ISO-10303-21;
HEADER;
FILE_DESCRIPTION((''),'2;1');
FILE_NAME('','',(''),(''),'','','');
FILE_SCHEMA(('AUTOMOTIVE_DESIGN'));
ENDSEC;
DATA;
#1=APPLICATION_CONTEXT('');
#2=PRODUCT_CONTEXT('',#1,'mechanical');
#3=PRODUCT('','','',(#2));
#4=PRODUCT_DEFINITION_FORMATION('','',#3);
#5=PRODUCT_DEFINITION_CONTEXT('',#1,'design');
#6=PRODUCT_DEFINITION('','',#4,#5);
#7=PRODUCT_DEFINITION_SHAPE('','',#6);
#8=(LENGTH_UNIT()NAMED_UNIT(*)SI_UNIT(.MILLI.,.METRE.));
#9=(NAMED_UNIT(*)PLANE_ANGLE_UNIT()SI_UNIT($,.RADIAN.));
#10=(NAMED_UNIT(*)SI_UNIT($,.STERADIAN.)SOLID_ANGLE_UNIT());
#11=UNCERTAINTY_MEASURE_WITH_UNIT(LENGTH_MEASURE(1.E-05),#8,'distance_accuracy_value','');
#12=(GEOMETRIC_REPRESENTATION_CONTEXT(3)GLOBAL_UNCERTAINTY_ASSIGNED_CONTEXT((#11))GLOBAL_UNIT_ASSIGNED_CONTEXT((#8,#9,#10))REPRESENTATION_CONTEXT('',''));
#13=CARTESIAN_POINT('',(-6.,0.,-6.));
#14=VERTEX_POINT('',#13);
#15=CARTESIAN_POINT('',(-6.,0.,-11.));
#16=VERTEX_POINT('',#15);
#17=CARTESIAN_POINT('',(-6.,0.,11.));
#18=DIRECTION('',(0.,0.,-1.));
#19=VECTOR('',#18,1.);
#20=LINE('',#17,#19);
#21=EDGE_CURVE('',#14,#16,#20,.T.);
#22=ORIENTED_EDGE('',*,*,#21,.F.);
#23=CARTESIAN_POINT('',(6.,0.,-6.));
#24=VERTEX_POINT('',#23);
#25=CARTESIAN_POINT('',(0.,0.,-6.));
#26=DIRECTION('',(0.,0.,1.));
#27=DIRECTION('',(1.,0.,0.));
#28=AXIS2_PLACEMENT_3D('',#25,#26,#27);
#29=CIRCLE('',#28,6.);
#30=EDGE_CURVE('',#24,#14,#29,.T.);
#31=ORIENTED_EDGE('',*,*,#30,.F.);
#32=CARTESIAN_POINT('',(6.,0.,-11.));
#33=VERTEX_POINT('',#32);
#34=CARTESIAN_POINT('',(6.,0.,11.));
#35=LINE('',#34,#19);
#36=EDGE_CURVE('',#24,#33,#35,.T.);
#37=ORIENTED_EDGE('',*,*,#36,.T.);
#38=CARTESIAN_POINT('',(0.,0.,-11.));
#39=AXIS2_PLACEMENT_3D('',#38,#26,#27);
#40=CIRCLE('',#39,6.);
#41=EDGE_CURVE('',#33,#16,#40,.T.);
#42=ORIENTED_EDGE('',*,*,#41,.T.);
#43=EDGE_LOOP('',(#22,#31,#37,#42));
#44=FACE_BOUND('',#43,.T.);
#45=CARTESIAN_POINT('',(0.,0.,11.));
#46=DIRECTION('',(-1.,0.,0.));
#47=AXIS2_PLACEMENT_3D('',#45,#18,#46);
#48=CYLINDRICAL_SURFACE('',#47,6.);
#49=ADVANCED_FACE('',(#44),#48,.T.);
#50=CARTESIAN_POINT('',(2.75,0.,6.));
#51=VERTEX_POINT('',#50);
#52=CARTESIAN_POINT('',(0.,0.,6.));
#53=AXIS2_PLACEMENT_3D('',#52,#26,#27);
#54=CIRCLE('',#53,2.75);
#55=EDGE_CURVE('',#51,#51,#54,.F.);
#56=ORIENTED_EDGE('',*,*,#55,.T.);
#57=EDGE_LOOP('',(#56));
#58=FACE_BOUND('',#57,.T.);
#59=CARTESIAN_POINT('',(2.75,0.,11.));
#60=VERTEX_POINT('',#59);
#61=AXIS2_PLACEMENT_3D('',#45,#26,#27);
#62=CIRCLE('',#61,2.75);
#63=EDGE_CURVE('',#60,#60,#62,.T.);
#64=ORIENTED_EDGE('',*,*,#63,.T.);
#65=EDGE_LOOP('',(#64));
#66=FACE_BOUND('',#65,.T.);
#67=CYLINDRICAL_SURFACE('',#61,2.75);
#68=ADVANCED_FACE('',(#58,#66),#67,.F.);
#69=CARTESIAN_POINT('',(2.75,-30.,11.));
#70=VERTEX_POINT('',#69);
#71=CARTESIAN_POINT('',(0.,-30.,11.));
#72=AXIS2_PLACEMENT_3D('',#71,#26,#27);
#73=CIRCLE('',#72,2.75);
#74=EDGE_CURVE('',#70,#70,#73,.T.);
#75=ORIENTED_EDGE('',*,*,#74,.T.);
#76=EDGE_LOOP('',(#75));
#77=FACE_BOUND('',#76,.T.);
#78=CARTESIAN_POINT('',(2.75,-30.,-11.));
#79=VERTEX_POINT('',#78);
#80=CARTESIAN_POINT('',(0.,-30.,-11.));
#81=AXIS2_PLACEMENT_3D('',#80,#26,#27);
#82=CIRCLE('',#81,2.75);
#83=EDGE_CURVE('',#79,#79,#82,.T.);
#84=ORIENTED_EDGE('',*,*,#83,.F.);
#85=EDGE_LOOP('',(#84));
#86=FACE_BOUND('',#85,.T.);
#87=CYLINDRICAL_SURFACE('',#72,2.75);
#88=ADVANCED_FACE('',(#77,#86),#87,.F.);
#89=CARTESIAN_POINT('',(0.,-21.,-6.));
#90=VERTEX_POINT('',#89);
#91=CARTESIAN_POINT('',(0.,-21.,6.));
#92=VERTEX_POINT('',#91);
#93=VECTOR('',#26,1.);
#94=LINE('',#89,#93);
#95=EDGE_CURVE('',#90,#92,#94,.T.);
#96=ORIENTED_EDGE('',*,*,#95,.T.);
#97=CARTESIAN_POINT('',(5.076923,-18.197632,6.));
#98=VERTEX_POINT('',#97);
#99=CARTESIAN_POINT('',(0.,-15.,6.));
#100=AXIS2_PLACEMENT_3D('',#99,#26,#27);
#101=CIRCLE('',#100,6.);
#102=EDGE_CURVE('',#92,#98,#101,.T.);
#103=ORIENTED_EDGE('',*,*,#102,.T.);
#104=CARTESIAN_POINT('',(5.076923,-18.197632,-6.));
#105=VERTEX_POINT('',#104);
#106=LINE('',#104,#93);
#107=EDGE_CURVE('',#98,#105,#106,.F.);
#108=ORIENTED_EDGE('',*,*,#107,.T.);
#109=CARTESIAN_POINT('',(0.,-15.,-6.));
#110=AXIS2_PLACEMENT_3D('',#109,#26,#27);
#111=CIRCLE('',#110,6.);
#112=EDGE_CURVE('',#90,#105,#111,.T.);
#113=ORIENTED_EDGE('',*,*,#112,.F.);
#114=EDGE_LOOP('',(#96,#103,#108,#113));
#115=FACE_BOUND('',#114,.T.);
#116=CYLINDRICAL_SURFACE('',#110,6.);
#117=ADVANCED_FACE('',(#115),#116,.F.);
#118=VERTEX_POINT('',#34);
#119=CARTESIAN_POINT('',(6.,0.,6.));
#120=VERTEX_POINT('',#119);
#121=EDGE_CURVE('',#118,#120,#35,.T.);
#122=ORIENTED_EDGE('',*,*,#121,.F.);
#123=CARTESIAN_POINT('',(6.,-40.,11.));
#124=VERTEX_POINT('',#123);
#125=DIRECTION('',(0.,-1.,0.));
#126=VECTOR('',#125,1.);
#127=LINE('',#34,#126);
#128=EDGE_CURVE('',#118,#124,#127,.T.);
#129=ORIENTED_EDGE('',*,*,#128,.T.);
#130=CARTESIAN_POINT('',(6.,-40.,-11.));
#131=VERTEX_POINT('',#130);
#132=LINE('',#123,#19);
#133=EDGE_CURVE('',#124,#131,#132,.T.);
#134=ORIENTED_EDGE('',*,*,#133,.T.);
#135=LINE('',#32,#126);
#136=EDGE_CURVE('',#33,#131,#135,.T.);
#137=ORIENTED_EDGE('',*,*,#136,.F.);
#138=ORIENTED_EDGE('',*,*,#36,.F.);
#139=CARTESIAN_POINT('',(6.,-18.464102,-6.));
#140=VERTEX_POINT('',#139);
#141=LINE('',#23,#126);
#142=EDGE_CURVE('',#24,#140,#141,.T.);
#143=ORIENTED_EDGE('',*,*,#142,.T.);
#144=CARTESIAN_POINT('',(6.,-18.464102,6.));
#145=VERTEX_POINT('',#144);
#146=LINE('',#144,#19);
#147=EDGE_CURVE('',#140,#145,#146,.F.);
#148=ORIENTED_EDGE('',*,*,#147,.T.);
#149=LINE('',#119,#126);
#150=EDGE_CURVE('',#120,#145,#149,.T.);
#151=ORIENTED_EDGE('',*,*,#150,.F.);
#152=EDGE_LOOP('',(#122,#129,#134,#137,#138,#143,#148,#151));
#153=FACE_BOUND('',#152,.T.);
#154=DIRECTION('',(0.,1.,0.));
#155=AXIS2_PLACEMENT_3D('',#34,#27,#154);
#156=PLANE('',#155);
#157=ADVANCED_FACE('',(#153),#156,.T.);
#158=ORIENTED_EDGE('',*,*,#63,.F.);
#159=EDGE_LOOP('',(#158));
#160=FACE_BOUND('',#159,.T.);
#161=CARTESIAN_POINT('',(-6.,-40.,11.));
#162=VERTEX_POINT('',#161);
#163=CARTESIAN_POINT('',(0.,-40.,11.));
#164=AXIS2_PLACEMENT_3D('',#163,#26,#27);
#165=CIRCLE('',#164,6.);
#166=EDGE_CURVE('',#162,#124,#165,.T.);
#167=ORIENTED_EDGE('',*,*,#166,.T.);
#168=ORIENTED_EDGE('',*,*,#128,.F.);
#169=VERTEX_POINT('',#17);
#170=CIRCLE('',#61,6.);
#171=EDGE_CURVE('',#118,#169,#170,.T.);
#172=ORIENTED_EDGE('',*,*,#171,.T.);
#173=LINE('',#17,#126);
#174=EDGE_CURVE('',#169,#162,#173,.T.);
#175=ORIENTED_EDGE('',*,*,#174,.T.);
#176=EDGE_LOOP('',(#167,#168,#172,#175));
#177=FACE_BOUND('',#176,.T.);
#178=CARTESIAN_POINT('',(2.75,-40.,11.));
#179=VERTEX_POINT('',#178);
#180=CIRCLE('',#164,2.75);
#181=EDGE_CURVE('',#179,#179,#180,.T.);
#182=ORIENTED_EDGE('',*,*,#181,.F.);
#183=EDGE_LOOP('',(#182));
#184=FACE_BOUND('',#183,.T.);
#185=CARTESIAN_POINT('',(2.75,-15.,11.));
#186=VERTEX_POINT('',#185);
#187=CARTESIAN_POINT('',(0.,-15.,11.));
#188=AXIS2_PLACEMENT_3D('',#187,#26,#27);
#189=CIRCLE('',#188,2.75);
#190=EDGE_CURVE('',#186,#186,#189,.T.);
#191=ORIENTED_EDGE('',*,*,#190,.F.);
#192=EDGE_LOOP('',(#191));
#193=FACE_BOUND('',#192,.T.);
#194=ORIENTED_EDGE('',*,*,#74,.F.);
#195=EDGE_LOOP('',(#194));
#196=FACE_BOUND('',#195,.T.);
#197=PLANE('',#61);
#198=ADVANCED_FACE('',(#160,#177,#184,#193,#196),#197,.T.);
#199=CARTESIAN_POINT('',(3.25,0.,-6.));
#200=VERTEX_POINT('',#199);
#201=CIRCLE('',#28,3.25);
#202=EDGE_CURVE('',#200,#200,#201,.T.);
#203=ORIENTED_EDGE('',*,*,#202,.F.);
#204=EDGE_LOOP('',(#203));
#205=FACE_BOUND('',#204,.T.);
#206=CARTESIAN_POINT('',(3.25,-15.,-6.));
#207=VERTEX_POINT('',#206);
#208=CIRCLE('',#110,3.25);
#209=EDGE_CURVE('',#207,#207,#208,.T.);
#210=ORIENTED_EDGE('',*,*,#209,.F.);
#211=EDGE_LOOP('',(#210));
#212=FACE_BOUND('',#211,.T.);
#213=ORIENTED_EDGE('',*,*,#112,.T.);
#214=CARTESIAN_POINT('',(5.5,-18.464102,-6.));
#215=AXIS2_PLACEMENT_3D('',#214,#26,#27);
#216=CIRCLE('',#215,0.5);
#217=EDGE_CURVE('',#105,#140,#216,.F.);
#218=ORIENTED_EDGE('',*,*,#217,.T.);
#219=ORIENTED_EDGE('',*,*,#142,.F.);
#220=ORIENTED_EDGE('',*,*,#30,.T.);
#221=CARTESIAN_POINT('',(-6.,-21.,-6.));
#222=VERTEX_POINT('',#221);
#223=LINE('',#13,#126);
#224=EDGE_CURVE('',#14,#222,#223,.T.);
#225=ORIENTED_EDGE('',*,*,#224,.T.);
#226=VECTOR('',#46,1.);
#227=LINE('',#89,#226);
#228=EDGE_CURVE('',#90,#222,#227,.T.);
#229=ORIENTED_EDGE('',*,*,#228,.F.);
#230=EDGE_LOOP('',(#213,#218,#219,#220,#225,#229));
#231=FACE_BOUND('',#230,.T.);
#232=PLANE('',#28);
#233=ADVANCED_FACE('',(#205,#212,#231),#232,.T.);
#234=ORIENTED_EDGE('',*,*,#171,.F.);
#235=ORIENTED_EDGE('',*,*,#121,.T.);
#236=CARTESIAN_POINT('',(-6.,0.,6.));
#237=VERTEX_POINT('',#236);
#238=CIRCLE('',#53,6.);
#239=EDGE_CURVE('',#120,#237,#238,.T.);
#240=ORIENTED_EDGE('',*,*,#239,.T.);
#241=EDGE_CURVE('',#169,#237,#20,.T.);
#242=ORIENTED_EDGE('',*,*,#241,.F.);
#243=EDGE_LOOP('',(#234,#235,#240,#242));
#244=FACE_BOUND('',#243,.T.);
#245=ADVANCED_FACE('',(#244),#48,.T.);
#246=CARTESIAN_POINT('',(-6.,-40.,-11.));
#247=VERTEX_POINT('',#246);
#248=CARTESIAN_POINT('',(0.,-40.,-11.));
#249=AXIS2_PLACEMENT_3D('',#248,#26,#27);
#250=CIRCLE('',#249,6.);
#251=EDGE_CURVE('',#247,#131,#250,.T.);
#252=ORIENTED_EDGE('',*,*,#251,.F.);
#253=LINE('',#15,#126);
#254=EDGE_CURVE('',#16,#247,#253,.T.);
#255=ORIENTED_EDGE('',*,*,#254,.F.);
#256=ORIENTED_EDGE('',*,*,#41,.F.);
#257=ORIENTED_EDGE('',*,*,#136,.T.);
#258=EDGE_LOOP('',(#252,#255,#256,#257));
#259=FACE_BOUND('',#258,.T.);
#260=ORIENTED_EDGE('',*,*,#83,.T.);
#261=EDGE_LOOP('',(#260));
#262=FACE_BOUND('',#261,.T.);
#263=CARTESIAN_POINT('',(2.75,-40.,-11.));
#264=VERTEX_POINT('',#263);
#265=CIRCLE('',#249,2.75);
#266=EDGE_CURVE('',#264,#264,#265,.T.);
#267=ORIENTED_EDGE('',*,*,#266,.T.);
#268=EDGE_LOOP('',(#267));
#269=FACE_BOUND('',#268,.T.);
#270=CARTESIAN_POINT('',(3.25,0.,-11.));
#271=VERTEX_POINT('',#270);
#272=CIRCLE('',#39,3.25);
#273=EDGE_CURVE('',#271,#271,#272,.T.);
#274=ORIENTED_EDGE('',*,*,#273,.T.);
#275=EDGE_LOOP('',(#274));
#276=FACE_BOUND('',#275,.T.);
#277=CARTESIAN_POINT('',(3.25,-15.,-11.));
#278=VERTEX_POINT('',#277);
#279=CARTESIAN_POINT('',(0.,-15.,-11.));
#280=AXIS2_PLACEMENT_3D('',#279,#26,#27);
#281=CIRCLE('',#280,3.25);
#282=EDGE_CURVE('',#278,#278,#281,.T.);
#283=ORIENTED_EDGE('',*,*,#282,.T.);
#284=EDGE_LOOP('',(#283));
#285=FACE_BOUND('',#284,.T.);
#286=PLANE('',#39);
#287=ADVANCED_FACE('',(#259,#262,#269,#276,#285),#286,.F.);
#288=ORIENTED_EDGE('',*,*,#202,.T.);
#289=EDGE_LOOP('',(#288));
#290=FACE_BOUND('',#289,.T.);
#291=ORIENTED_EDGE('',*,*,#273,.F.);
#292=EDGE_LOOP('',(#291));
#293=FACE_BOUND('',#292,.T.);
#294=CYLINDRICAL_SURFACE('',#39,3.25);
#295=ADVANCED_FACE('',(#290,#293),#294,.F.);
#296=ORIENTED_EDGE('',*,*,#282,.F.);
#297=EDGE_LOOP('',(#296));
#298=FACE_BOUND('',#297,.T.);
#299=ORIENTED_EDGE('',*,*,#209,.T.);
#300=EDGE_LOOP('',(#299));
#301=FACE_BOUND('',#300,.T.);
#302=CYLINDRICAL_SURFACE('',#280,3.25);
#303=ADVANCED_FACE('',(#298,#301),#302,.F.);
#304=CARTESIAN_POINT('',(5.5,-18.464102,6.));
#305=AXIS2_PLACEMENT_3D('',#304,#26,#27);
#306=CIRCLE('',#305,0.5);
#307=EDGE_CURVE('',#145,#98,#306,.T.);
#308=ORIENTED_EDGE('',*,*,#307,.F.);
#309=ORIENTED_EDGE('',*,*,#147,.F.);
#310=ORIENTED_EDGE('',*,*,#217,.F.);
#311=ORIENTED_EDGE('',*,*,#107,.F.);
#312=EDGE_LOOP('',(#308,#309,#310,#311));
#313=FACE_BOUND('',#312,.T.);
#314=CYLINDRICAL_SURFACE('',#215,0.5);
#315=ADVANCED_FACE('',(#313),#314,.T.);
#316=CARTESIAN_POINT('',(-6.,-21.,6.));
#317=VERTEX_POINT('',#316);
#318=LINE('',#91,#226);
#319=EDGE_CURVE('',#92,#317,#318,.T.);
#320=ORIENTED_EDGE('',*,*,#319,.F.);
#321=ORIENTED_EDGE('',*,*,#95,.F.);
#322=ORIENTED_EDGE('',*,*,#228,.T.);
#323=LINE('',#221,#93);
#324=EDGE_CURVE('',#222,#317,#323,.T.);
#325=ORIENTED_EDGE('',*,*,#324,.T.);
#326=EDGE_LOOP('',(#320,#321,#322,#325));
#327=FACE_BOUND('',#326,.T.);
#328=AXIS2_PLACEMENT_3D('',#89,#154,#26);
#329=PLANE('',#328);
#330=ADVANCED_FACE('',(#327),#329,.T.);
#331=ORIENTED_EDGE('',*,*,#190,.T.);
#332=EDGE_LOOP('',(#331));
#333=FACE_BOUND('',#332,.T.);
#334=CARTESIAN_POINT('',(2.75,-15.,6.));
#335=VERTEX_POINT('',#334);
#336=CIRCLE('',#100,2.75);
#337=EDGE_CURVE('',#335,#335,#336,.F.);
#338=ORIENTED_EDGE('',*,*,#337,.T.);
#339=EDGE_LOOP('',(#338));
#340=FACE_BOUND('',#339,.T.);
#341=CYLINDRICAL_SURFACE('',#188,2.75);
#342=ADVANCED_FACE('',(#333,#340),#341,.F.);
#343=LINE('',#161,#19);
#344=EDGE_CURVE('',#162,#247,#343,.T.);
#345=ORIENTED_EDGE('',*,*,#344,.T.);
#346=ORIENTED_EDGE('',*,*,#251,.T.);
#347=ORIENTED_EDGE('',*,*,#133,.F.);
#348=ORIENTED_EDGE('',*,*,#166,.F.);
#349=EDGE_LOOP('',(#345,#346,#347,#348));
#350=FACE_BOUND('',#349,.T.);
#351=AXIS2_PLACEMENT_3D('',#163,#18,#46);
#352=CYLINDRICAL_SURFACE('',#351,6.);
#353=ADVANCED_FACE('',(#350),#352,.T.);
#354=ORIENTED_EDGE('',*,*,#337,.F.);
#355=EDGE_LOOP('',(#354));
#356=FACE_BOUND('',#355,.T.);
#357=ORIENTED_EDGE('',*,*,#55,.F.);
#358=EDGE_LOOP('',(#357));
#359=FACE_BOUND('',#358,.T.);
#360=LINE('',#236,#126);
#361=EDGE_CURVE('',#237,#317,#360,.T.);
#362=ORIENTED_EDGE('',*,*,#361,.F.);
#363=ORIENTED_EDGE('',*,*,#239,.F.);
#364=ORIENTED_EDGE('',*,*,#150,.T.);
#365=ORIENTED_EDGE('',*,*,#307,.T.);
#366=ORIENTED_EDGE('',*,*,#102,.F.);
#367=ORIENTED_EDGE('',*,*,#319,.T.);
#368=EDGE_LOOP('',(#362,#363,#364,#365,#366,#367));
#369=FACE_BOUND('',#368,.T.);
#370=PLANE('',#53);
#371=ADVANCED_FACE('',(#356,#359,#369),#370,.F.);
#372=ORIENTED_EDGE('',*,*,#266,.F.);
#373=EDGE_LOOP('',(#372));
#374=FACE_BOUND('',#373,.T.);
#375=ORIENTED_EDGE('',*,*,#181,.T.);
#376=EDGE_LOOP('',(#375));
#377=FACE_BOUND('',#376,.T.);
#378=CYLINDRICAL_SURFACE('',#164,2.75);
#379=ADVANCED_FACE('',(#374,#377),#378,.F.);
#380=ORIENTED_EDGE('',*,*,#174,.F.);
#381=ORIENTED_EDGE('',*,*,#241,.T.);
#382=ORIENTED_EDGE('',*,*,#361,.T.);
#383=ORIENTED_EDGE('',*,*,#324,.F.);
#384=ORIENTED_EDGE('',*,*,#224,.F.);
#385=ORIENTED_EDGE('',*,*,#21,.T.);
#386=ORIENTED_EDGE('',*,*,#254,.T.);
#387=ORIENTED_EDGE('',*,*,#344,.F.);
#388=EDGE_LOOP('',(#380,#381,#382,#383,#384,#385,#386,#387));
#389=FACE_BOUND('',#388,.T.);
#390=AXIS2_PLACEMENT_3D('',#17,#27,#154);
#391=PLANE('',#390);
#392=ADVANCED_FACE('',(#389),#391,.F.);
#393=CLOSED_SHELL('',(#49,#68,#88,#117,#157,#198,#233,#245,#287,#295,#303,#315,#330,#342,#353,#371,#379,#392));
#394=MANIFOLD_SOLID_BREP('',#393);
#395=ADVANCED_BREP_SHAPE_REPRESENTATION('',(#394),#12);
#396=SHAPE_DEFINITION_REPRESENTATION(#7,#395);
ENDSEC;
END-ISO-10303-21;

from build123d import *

# Parameters (mm, degrees)
BOSS_EXTRUDE1_DEPTH  = 11
M5_CLEARANCE_HOLE1_D = 5.5
CUT_EXTRUDE1_DEPTH   = 6
SKETCH1_4_R          = 3.25
CUT_EXTRUDE2_DEPTH   = 48.675989764
FILLET1_R            = 0.5


with BuildPart() as part:
    # Sketch1 → Boss-Extrude1 (new, symmetric)
    with BuildSketch(Plane.XY):
        with BuildLine():
            ThreePointArc((6, 0), (0, 6), (-6, 0))
            Line((-6, 0), (-6, -40))
            ThreePointArc((-6, -40), (0, -46), (6, -40))
            Line((6, -40), (6, 0))
        make_face()
    extrude(amount=BOSS_EXTRUDE1_DEPTH, both=True)

    # M5 Clearance Hole1 (through all)
    with Locations(Plane.XY.offset(11)):
        with Locations((0, 0), (0, -15), (0, -30), (0, -40)):
            Hole(M5_CLEARANCE_HOLE1_D / 2)

    # Sketch1<3> → Cut-Extrude1 (cut, symmetric)
    with BuildSketch(Plane.XY):
        with BuildLine():
            Line((6, -15), (6, 0))
            ThreePointArc((6, 0), (0, 6), (-6, 0))
            Line((-6, 0), (-6, -21))
            Line((-6, -21), (0, -21))
            ThreePointArc((0, -21), (4.242640687, -19.242640687), (6, -15))
        make_face()
    extrude(amount=CUT_EXTRUDE1_DEPTH, both=True, mode=Mode.SUBTRACT)

    # Sketch1<4> → Cut-Extrude2 (cut, through all)
    with BuildSketch(Plane.XY):
        Circle(SKETCH1_4_R)
        with Locations((0, -15)):
            Circle(SKETCH1_4_R)
    extrude(amount=-CUT_EXTRUDE2_DEPTH, mode=Mode.SUBTRACT)

    # Fillet1
    fillet1_edges = [part.edges().sort_by_distance(p)[0] for p in [
        (6, -15, 0),
    ]]
    fillet(fillet1_edges, radius=FILLET1_R)


solid = part.part
